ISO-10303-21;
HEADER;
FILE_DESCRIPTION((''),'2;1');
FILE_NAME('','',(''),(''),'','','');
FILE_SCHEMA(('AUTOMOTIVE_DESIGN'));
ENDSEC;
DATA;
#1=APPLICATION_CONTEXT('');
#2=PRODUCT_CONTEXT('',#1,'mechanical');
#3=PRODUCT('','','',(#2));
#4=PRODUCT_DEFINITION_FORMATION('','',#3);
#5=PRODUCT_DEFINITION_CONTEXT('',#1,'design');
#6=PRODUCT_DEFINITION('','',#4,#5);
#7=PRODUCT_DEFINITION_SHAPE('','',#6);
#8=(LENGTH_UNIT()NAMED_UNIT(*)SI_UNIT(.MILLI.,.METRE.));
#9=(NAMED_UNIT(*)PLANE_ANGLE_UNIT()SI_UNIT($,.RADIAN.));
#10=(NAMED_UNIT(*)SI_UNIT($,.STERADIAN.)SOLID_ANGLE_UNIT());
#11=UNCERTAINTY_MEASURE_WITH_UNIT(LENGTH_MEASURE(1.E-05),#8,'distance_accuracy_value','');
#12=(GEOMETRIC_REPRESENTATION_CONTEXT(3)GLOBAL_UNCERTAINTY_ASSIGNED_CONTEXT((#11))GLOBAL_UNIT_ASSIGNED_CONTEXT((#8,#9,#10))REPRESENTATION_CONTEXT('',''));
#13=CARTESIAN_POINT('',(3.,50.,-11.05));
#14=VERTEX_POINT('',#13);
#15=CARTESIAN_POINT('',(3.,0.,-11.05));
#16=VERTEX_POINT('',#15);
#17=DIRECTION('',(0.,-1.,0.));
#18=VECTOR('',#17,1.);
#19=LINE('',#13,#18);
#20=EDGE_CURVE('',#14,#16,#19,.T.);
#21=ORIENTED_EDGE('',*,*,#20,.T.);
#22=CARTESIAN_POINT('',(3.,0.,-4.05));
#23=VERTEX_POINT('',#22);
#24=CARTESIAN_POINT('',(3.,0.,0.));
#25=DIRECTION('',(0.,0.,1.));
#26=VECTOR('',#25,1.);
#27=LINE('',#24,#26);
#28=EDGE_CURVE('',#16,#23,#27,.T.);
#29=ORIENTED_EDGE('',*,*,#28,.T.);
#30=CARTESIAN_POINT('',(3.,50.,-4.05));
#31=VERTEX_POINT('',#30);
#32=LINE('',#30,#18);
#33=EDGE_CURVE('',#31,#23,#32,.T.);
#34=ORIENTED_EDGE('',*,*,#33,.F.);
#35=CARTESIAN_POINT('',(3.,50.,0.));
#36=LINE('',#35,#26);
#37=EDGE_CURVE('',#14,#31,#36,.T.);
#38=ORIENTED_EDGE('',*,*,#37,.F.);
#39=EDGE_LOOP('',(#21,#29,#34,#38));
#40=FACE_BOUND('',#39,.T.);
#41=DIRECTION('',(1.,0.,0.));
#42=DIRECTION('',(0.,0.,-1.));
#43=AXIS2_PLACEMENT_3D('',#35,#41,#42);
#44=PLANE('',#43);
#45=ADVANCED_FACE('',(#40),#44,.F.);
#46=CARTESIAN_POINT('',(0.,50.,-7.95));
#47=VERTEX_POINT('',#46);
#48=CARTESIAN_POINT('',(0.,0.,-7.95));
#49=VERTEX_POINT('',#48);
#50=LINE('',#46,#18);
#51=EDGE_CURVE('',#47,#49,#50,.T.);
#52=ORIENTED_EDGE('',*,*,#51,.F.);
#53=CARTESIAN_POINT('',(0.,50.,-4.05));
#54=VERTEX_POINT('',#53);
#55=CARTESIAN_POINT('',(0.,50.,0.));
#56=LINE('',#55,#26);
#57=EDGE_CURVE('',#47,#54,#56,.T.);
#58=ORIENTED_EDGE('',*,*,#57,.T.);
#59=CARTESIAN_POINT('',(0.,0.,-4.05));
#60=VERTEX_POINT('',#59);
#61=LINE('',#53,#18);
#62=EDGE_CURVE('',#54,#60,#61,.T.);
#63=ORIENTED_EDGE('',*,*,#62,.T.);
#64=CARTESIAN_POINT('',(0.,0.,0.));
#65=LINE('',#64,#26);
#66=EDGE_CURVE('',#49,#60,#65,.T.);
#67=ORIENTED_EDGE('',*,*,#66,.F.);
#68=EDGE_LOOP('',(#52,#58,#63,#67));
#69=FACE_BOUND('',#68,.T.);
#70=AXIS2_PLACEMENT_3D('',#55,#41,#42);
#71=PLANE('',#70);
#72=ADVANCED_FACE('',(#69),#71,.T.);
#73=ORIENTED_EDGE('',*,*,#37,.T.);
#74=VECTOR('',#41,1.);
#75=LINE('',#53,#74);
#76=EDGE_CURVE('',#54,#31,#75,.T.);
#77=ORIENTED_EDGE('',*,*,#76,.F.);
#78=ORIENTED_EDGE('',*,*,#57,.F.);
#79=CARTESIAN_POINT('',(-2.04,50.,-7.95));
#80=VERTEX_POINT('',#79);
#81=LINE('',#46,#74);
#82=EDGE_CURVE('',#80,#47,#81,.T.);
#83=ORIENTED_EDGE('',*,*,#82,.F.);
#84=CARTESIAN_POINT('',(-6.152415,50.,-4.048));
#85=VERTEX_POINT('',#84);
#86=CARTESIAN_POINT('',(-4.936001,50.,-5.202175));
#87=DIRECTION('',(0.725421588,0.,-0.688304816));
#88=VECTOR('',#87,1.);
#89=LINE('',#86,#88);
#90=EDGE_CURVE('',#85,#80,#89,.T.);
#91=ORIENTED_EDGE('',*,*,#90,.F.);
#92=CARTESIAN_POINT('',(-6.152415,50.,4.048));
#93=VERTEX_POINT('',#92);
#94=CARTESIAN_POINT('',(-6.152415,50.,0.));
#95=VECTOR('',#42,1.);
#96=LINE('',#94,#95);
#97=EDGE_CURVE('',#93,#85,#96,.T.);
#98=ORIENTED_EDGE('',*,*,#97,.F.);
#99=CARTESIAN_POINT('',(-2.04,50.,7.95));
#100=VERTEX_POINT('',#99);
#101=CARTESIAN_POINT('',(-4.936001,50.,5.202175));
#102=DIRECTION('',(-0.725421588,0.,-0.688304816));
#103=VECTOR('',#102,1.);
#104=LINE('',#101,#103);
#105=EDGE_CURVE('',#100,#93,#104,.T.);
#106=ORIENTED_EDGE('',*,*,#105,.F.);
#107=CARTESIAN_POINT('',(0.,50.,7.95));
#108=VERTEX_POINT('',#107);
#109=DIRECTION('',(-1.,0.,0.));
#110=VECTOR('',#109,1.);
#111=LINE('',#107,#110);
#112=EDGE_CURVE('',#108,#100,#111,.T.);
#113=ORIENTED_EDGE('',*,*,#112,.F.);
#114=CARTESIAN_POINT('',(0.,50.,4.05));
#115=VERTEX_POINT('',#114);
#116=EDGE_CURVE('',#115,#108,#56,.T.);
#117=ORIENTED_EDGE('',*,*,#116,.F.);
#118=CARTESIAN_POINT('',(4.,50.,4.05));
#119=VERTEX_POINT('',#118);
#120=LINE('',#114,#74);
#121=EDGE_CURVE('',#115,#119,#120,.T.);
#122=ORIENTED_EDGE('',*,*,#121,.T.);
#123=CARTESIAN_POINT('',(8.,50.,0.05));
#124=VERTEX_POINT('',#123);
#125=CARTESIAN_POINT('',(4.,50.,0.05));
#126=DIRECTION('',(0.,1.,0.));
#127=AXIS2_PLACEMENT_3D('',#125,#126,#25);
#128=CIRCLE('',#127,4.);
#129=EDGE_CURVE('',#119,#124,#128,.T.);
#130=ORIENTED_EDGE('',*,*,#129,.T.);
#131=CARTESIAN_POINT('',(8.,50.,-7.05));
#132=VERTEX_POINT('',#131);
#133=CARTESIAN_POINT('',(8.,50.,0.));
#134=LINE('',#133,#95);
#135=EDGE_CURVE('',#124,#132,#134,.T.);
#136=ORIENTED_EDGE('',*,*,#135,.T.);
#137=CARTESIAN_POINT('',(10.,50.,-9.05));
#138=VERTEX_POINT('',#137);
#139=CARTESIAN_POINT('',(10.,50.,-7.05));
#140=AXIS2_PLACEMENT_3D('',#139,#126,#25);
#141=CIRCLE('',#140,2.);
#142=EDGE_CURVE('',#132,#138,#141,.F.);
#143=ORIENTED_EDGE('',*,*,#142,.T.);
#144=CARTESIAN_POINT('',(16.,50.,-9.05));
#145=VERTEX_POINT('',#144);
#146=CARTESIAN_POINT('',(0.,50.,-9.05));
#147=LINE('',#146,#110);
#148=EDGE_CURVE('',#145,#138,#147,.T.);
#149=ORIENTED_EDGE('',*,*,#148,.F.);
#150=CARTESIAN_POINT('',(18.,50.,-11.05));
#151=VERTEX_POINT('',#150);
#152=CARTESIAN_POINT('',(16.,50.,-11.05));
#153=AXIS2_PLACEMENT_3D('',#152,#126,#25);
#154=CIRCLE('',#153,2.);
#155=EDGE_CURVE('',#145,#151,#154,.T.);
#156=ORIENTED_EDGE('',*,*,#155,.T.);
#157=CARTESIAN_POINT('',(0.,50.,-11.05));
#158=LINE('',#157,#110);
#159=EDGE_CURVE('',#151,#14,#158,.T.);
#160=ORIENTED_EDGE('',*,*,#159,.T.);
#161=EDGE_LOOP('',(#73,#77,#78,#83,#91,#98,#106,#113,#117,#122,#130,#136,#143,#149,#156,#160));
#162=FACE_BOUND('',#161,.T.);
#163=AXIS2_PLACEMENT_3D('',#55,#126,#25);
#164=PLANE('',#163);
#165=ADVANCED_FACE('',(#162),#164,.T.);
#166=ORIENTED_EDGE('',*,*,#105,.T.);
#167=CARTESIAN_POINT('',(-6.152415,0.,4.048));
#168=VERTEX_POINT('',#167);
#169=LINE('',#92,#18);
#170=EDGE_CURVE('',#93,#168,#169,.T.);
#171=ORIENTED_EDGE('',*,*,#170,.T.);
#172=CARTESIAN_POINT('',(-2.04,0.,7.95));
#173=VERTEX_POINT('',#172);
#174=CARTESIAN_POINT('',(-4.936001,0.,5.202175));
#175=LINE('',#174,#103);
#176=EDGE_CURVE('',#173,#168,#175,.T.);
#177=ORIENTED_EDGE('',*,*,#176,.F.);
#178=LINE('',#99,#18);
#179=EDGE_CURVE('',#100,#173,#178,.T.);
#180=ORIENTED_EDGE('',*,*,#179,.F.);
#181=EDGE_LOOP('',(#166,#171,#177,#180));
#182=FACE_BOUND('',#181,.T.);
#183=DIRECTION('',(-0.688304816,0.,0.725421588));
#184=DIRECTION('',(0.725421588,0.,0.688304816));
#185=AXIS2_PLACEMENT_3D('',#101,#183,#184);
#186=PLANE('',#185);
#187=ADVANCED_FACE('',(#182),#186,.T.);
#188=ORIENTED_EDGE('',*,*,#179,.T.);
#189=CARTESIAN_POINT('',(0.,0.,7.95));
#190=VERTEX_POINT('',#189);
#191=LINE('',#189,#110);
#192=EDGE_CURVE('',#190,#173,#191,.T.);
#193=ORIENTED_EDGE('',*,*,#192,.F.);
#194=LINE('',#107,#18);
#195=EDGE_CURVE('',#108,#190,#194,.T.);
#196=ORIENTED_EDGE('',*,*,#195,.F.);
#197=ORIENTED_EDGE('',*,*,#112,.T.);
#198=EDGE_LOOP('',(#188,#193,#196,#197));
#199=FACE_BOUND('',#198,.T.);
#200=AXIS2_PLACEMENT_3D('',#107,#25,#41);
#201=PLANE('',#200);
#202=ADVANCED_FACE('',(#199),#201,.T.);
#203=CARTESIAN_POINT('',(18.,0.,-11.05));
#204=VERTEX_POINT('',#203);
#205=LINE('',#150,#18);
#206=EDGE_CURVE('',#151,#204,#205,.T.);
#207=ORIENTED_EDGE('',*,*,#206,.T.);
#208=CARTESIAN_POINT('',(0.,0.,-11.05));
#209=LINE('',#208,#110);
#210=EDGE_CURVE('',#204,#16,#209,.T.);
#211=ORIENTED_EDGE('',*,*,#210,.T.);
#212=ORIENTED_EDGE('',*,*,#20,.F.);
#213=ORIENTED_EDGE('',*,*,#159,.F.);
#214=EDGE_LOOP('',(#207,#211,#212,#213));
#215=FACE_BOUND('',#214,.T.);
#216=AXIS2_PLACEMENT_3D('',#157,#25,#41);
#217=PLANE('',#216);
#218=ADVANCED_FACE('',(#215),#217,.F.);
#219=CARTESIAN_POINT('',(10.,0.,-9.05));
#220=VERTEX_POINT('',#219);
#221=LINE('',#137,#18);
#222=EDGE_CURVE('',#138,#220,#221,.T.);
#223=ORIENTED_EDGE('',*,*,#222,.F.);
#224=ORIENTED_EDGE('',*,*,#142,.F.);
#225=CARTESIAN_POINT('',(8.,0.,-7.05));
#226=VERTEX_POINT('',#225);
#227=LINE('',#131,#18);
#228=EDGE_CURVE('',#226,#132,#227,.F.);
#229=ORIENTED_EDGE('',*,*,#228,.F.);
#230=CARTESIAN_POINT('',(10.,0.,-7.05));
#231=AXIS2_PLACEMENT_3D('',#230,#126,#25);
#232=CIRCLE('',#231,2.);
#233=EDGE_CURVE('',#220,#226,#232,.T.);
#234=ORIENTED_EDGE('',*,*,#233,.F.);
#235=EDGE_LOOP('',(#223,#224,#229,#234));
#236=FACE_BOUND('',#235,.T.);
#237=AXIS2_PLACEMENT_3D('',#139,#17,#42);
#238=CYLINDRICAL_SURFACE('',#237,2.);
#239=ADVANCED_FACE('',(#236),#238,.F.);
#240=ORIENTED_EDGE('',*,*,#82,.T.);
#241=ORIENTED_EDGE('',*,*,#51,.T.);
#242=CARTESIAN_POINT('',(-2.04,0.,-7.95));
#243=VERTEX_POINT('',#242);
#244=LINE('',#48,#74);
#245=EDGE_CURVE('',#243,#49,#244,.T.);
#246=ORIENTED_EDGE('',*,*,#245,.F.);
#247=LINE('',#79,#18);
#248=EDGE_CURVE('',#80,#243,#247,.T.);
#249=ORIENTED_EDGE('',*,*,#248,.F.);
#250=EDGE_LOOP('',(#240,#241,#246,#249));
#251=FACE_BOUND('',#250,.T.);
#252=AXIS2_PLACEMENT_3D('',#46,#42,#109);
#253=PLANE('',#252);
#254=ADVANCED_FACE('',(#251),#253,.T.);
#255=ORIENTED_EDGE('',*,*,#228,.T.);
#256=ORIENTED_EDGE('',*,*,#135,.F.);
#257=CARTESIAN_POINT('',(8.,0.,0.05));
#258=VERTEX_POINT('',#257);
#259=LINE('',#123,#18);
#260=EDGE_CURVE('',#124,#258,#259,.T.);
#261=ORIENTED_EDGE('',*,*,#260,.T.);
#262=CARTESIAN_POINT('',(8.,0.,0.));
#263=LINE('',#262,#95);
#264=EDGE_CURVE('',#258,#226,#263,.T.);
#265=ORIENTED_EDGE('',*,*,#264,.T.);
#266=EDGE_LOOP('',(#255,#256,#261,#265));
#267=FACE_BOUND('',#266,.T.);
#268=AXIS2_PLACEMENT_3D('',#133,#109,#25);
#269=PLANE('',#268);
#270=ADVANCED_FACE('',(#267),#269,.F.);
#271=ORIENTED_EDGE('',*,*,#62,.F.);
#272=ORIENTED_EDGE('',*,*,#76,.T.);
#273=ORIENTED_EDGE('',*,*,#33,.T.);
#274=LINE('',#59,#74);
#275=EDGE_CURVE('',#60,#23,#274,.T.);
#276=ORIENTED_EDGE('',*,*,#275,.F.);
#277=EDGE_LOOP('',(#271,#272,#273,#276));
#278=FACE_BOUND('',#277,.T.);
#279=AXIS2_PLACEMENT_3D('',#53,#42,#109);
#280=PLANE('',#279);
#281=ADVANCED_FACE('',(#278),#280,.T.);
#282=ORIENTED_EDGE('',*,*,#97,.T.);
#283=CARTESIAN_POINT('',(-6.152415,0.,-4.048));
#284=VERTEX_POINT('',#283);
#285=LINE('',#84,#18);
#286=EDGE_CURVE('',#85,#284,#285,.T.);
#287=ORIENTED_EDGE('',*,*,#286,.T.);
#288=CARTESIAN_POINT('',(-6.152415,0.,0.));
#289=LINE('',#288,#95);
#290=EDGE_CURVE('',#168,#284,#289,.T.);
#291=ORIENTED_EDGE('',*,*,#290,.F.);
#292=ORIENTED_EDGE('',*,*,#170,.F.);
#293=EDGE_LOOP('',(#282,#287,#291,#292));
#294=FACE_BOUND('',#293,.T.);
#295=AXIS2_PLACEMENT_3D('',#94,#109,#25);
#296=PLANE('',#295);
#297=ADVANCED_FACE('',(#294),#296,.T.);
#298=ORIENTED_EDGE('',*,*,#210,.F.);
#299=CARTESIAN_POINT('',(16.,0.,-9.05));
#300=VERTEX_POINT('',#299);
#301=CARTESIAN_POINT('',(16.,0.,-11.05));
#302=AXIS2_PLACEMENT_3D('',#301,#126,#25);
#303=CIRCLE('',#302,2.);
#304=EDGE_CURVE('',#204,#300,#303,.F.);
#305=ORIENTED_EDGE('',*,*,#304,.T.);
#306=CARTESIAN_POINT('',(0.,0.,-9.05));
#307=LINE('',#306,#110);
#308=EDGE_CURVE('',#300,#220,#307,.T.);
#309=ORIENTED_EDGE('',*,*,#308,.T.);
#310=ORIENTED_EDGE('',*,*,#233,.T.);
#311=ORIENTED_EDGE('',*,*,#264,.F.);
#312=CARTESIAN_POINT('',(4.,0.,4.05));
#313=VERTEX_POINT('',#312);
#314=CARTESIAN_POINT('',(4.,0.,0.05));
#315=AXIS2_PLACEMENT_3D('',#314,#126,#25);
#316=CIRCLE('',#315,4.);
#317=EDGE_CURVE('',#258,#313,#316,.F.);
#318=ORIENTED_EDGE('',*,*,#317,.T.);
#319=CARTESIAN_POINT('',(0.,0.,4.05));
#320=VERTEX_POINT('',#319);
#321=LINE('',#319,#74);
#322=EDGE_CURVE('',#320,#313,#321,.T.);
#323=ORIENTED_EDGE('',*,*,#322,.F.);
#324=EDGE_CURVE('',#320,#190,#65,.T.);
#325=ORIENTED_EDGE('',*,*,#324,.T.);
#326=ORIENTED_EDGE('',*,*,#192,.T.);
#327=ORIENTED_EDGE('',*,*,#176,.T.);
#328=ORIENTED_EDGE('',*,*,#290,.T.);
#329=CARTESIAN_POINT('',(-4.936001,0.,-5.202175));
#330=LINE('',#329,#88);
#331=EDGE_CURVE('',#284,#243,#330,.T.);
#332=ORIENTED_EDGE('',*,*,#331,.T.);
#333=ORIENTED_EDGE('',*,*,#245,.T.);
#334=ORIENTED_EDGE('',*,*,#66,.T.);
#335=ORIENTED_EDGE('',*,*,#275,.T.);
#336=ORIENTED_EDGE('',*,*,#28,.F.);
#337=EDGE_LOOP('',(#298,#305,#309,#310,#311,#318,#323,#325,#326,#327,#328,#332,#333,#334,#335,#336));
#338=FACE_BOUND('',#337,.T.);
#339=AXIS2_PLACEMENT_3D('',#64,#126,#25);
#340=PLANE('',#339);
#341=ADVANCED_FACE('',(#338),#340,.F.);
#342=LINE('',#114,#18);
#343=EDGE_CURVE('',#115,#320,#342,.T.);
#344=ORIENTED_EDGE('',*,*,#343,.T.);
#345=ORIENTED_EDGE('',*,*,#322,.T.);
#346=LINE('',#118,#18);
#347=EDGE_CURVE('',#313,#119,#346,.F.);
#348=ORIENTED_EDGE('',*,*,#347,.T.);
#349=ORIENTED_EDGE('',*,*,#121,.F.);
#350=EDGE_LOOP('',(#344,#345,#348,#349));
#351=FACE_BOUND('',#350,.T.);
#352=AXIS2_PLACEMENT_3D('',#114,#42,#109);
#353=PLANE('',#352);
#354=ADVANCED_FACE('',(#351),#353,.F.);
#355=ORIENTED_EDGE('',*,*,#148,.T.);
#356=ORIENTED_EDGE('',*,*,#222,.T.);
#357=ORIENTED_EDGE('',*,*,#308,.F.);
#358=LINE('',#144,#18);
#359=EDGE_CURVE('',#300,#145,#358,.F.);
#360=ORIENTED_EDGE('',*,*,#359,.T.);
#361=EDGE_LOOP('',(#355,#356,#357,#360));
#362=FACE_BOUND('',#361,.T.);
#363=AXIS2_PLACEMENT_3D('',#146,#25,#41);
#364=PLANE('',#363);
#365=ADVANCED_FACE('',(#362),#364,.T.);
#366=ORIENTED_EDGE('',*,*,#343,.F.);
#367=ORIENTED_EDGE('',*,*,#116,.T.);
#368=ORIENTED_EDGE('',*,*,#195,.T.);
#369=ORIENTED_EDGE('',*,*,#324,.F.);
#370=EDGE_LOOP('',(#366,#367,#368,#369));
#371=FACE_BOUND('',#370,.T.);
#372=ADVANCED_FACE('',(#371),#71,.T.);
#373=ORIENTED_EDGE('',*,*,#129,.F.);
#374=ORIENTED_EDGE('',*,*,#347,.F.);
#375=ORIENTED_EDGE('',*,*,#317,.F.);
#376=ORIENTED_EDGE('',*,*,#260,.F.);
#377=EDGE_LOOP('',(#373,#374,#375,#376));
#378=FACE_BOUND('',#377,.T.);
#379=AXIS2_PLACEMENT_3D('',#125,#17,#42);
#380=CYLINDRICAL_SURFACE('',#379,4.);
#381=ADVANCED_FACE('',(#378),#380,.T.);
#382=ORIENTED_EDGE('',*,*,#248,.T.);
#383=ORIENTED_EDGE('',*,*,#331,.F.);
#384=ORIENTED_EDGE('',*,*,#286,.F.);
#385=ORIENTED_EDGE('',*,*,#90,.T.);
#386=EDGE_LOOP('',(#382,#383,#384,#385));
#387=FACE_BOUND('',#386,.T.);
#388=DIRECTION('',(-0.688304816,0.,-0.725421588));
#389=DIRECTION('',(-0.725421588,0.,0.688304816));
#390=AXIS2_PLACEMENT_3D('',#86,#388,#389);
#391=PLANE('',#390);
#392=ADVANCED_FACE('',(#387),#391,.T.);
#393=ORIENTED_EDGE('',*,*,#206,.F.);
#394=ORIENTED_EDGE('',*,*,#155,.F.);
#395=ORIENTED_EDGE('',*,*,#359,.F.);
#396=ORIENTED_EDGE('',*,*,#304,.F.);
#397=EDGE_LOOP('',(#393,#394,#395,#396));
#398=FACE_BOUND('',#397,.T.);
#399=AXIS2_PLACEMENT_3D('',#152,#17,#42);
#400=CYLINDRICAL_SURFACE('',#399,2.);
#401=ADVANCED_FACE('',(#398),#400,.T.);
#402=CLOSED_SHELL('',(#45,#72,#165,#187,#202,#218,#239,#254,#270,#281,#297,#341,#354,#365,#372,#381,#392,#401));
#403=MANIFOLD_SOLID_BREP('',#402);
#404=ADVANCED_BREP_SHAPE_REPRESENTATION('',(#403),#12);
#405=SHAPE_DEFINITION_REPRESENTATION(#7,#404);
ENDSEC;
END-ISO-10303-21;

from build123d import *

# Parameters (mm, degrees)
SKETCH1_W           = 10
SKETCH1_H           = 2
BOSS_EXTRUDE1_DEPTH = 50
FILLET1_R           = 2
FILLET2_R           = 4
FILLET3_R           = 2


with BuildPart() as part:
    # Sketch1 → Boss-Extrude1 (new body)
    with BuildSketch(Plane(origin=(0, 0, 0), x_dir=(1, 0, 0), z_dir=(0, 1, 0))):
        Polygon((3, 4.05), (0, 4.05), (0, -4.05), (8, -4.05), (8, 4.05), align=None)
        Polygon((3, 11.05), (3, 4.05), (8, 4.05), (8, 9.05), (8, 11.05), align=None)
        Polygon((-2.04, 7.95), (0, 7.95), (0, -7.95), (-2.04, -7.95), (-6.152414984, -4.048), (-6.152414984, 4.048), align=None)
        with Locations((13, 10.05)):
            Rectangle(SKETCH1_W, SKETCH1_H)
    extrude(amount=BOSS_EXTRUDE1_DEPTH)

    # Fillet1
    fillet1_edges = [part.edges().sort_by_distance(p)[0] for p in [
        (8, 25, -9.05),
    ]]
    fillet(fillet1_edges, radius=FILLET1_R)

    # Fillet2
    fillet2_edges = [part.edges().sort_by_distance(p)[0] for p in [
        (8, 25, 4.05),
    ]]
    fillet(fillet2_edges, radius=FILLET2_R)

    # Fillet3
    fillet3_edges = [part.edges().sort_by_distance(p)[0] for p in [
        (18, 25, -9.05),
    ]]
    fillet(fillet3_edges, radius=FILLET3_R - 0.0001)  # a hair under: the kernel refuses the full size


solid = part.part
